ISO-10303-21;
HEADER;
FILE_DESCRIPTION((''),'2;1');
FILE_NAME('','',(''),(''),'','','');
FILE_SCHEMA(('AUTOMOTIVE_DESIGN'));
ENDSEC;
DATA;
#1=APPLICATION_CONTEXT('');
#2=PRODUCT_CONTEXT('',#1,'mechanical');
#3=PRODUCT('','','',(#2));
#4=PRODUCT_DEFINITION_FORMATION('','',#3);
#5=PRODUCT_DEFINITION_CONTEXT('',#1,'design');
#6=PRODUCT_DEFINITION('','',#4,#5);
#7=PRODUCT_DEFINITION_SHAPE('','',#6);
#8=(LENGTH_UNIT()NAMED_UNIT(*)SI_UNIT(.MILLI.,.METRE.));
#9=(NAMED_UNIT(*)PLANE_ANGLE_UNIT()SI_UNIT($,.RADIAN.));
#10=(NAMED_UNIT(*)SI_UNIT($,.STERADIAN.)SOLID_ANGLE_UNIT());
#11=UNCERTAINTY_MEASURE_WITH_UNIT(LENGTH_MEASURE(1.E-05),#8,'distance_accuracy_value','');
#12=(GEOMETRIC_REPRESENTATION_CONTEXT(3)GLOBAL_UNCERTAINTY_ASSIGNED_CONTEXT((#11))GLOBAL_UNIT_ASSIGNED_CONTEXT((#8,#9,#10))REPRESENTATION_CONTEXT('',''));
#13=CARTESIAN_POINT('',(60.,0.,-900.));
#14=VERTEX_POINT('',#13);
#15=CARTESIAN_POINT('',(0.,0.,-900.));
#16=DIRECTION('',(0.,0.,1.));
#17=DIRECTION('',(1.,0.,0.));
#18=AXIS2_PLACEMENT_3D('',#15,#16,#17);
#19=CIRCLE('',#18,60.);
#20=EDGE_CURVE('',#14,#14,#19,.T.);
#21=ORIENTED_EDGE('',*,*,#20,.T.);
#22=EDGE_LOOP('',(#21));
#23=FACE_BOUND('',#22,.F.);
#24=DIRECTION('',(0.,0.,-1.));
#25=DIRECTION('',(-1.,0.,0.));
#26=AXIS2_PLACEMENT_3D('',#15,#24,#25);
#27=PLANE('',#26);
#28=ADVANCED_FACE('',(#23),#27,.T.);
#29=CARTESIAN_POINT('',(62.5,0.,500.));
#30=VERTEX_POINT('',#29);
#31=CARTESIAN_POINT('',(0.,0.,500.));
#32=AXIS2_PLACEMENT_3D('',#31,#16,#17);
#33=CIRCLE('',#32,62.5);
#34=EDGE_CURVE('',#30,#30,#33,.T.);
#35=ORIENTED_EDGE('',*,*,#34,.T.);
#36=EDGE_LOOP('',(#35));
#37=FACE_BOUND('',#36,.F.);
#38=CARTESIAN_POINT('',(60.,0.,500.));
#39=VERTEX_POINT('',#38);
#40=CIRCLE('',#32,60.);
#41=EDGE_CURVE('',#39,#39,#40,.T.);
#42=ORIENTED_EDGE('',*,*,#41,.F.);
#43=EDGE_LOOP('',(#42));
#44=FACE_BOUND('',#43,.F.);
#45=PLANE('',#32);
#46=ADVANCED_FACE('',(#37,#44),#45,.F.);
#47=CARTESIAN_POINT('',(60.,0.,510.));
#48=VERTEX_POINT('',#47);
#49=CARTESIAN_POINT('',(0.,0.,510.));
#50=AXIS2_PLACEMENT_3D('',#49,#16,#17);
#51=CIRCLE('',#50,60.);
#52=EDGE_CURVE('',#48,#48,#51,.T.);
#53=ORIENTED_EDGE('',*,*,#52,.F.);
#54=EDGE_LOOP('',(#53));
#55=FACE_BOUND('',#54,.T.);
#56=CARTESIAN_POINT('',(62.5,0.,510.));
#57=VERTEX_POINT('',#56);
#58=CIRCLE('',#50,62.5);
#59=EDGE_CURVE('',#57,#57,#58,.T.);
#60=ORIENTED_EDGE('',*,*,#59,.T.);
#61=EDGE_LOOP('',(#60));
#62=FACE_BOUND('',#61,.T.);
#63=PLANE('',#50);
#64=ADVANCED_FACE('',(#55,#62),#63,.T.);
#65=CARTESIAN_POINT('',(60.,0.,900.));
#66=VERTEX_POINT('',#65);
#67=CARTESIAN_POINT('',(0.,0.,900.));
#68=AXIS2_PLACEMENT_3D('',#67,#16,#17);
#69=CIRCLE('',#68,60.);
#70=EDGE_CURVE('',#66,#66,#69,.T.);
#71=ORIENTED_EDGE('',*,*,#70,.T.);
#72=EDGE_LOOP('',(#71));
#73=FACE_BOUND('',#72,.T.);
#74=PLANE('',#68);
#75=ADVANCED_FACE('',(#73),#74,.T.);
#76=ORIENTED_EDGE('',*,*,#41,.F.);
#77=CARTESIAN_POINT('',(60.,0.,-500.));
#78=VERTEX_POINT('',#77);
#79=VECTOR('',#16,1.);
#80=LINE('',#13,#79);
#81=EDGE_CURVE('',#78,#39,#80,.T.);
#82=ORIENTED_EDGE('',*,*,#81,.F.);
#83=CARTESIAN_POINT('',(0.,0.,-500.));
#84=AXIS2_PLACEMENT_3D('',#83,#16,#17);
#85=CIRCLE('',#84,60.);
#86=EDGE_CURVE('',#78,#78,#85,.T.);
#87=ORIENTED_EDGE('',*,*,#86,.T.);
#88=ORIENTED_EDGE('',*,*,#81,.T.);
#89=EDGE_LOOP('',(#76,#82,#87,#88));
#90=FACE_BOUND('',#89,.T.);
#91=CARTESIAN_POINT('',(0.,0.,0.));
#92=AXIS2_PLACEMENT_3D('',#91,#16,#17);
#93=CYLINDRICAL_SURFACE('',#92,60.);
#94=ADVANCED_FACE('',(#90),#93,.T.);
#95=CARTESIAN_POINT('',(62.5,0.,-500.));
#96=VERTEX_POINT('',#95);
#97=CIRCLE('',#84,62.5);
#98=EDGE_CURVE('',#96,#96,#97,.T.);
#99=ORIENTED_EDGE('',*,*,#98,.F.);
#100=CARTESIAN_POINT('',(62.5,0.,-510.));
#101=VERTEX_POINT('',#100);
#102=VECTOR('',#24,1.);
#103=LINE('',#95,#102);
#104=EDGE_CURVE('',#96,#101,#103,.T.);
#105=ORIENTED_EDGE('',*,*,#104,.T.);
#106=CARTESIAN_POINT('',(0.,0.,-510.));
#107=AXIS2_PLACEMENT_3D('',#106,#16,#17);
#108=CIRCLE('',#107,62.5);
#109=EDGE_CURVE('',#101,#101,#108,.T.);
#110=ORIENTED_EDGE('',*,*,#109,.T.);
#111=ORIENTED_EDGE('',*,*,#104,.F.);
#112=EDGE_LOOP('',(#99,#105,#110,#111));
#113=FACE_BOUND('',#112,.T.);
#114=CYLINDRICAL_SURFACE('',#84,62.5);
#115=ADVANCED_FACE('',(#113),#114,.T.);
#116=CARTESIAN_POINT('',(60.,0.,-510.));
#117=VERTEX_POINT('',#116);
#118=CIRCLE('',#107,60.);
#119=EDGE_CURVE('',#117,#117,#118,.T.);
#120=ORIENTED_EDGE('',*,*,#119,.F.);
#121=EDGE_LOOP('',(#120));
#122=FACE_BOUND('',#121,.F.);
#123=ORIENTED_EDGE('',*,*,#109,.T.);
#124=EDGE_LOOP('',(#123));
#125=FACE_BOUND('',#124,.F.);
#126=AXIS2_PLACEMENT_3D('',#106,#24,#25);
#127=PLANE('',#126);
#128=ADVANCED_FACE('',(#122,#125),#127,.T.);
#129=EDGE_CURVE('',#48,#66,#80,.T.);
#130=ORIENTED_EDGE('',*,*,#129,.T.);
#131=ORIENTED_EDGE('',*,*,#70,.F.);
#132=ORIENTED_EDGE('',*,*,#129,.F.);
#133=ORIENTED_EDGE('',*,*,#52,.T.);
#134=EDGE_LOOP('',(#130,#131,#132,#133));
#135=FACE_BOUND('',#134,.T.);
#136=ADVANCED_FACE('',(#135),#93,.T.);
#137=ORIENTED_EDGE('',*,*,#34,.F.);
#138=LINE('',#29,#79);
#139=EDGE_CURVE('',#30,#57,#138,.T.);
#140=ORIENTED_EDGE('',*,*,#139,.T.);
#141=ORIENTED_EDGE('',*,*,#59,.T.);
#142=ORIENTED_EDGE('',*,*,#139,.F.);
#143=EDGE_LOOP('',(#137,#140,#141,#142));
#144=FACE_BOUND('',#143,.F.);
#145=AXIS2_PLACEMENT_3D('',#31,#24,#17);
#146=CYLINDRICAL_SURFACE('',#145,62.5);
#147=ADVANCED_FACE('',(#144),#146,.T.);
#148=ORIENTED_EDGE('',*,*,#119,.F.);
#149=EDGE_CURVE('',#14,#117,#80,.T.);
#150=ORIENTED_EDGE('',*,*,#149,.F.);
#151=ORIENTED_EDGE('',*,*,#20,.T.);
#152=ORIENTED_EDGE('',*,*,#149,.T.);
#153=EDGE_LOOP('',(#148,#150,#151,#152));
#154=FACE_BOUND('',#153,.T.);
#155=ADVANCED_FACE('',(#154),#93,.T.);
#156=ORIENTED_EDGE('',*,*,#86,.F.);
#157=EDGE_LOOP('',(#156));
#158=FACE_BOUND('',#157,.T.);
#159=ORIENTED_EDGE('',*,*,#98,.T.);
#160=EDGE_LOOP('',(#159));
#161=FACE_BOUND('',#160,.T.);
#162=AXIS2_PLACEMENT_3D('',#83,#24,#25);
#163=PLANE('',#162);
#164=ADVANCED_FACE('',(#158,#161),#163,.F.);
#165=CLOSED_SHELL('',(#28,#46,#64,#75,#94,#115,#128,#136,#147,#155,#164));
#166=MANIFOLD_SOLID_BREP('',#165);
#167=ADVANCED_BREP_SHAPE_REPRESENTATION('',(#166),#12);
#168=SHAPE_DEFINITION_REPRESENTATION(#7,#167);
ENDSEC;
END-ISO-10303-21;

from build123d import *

# Parameters (mm, degrees)
F0_R     = 60
F1_DEPTH = 900
F4_R     = 62.5
F4_R_2   = 60
F5_DEPTH = 10


# Not quite as in the source:
# - a pattern or mirror of a feature is missing from the dataset's text; its kind, count and spacing are read off the source's solid


with BuildPart() as f1:
    # F0 (on Top) → F1 (new body)
    with BuildSketch(Plane.XY):
        Circle(F0_R)
    extrude(amount=F1_DEPTH)

    # F2: F1 across plane


with BuildPart() as f1_1:
    add(f1.part)
    add(f1.part.mirror(Plane.XY))

    # F4 (on offset) → F5 (join)
    with BuildSketch(Plane.XY.offset(500)):
        Circle(F4_R)
        Circle(F4_R_2, mode=Mode.SUBTRACT)
    f5 = extrude(amount=F5_DEPTH)

    # F5_copies: F5 across plane
    add(f5.mirror(Plane(origin=(0, 0, 0), x_dir=(-1, 0, 0), z_dir=(0, 0, -1))))


solid = f1_1.part
